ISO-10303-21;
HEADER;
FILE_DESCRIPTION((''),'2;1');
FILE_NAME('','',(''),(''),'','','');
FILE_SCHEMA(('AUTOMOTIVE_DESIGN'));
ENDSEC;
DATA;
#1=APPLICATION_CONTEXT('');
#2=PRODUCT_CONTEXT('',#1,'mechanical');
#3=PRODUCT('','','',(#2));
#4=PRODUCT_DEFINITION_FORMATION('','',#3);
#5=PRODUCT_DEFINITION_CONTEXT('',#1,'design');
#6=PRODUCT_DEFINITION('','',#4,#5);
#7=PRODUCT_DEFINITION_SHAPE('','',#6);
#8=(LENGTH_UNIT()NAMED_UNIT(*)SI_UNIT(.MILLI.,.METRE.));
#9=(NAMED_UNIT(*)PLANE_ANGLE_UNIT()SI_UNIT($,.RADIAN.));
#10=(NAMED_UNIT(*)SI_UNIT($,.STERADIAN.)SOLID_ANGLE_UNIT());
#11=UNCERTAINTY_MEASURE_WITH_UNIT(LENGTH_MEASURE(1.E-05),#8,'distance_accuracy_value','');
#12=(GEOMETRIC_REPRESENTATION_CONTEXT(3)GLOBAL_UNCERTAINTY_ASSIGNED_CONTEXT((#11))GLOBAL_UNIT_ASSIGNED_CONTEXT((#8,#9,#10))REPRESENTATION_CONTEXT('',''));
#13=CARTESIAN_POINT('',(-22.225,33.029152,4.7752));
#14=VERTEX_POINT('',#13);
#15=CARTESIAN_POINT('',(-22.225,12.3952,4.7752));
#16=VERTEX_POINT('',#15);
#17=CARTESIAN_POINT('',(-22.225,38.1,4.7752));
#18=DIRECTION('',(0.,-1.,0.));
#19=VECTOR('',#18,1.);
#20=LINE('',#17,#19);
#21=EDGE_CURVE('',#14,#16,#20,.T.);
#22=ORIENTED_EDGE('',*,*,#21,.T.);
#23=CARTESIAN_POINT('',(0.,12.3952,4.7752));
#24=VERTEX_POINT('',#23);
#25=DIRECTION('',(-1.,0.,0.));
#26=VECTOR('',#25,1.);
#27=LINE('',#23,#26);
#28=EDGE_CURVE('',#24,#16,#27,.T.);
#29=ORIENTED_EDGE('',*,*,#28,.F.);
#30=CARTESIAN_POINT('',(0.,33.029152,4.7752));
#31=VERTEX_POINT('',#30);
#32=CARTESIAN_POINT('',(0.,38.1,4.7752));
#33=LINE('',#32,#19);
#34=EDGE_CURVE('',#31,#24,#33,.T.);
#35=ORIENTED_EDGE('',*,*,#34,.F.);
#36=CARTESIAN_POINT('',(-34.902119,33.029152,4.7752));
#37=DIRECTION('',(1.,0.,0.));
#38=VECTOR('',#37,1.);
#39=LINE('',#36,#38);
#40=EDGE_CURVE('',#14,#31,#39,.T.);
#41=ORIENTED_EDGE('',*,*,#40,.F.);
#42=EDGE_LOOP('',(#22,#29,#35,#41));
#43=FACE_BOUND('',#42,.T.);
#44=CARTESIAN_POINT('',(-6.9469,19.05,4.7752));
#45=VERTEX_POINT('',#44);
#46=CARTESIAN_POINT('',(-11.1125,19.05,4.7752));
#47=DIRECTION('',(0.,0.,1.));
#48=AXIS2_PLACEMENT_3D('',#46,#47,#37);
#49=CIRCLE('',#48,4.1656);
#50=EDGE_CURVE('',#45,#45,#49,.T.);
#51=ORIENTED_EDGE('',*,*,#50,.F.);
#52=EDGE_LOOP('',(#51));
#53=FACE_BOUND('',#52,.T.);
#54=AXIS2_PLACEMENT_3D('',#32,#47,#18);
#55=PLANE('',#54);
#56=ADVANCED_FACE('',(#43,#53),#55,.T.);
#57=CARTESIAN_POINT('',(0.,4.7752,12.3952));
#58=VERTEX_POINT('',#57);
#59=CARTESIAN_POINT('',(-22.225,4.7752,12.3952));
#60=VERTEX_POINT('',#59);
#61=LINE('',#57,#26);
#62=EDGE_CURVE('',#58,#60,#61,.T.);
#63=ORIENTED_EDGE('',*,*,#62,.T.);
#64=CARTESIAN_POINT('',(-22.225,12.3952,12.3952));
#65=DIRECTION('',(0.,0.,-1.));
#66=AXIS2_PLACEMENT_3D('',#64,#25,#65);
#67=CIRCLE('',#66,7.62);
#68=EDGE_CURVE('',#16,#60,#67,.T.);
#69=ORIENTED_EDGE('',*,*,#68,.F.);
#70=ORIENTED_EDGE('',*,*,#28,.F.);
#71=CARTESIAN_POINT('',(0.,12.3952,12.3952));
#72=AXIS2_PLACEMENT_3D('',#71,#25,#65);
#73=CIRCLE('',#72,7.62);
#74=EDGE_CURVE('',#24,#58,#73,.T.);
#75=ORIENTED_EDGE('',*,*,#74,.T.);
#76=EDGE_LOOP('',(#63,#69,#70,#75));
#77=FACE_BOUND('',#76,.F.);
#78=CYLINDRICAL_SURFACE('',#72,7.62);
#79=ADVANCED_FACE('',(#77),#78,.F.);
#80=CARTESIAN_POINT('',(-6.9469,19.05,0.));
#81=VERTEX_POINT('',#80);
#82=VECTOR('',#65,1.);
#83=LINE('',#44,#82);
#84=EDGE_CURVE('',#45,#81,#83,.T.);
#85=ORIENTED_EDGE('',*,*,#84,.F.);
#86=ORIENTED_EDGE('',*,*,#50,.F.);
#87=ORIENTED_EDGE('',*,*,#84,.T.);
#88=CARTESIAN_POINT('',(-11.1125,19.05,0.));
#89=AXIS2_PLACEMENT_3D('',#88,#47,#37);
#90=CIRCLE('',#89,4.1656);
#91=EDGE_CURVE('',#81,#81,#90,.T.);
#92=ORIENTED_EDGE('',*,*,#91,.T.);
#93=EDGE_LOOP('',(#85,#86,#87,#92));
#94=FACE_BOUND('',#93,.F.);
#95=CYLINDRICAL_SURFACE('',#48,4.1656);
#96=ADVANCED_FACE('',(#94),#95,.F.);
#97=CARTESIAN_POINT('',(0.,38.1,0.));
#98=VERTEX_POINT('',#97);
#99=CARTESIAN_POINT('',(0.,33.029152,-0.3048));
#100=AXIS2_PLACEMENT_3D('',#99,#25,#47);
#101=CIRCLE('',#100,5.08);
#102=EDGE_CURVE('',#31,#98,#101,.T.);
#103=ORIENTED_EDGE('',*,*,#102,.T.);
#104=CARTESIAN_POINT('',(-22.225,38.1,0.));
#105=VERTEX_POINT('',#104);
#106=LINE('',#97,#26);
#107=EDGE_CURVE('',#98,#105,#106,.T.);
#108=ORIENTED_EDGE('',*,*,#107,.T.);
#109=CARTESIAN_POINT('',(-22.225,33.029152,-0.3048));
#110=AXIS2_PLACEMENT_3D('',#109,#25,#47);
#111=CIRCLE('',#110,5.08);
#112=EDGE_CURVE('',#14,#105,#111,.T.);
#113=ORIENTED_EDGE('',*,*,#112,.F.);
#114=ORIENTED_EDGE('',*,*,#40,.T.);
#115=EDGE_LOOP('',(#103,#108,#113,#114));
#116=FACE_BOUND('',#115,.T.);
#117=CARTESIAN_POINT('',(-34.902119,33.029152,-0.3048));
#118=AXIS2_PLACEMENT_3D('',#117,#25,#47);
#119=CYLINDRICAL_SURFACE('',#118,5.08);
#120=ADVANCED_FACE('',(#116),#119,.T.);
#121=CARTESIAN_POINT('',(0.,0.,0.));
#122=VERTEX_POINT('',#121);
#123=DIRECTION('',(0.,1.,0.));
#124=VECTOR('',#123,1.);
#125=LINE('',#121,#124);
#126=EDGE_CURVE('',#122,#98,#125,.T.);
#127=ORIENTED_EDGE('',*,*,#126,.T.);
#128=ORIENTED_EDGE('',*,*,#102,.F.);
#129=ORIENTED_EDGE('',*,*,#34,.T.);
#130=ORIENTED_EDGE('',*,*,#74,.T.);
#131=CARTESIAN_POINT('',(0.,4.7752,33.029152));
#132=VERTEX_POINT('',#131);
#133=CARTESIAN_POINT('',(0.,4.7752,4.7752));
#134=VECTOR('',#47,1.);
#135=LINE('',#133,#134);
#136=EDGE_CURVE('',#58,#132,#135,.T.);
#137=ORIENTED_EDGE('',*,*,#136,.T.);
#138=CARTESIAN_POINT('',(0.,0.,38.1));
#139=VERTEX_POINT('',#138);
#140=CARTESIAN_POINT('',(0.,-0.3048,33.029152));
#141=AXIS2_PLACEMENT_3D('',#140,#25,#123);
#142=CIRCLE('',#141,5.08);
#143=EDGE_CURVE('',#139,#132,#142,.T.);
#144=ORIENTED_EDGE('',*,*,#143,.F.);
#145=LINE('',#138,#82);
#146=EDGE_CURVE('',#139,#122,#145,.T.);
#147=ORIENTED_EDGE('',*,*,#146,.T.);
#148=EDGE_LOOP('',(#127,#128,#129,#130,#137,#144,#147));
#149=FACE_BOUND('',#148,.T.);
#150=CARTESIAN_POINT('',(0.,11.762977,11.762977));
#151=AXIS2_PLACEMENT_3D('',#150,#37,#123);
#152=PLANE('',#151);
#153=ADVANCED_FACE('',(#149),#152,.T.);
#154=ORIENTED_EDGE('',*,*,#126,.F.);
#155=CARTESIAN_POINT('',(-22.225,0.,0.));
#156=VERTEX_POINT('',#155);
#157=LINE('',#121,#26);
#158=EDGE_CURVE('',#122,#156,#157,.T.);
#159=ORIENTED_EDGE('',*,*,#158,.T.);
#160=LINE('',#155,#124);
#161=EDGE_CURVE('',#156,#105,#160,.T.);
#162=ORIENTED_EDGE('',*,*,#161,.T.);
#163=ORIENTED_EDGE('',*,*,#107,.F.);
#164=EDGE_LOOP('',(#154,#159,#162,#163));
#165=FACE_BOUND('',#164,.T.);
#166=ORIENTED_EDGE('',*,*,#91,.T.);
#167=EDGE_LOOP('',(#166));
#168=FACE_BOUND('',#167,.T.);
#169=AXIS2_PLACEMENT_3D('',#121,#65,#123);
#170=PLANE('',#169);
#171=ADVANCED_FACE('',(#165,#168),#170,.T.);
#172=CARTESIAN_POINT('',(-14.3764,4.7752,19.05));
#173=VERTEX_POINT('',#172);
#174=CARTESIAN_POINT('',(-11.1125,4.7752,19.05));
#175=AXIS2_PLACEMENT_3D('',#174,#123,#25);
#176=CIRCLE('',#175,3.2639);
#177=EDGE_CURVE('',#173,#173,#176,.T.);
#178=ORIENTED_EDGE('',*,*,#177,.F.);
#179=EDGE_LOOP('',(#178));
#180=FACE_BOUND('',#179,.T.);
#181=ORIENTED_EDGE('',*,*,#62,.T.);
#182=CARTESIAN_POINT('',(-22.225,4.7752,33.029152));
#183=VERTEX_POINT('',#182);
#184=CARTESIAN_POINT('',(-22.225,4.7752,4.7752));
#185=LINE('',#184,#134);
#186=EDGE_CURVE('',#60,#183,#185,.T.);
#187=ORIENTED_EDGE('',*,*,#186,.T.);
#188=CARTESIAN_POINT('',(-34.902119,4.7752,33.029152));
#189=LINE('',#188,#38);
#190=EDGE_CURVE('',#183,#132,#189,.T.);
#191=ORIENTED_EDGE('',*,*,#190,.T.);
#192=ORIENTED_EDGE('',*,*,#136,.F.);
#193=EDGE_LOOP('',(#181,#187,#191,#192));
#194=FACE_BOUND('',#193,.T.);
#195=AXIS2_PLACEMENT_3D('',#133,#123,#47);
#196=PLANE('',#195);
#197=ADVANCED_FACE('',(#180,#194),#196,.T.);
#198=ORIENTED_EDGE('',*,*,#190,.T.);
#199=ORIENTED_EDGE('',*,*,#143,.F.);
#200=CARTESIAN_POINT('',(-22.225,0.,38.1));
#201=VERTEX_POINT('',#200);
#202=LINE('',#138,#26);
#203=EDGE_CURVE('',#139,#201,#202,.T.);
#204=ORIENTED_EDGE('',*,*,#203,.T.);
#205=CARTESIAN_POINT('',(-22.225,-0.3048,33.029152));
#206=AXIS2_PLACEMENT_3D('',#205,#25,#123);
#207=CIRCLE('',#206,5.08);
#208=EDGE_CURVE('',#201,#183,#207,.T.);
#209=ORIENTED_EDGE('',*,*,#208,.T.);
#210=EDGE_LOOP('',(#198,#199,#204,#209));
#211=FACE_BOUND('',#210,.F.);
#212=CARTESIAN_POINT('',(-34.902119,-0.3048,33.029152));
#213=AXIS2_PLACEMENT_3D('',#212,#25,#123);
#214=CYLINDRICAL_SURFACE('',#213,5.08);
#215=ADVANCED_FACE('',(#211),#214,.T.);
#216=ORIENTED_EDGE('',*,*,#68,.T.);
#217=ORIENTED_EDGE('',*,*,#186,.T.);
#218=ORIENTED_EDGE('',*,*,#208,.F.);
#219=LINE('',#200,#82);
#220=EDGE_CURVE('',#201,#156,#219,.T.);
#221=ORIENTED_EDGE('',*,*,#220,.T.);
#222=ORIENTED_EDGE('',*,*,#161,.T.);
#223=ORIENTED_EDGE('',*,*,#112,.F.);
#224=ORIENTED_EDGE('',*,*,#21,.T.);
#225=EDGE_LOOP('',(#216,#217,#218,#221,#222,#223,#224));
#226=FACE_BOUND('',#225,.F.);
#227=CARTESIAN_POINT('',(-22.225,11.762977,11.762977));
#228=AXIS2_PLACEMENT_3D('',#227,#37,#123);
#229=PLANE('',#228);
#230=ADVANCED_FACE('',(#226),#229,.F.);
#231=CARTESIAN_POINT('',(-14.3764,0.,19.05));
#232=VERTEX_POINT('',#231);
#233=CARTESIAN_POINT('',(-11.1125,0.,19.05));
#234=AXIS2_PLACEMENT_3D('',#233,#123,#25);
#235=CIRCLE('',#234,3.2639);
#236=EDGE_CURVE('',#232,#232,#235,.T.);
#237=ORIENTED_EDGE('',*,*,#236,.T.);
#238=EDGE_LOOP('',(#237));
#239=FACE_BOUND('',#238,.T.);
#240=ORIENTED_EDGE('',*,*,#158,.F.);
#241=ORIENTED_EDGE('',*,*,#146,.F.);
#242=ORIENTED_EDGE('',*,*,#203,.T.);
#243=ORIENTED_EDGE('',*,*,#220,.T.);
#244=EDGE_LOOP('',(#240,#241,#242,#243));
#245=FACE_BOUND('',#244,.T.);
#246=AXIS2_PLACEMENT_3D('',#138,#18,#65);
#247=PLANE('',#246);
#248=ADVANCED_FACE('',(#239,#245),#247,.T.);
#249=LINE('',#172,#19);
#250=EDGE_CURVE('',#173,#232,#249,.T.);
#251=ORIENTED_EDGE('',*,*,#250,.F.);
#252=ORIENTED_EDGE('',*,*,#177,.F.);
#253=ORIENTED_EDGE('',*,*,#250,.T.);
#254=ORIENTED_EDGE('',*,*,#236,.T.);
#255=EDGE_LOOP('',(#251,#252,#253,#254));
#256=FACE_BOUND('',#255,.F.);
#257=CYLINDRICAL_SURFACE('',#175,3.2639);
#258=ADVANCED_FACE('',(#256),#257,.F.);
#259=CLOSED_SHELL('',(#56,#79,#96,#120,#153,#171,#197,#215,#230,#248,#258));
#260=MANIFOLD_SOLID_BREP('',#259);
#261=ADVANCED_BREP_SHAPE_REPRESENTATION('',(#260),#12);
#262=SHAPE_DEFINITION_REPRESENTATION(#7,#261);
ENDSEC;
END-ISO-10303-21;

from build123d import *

# Parameters (mm, degrees)
F1_DEPTH    = 22.225
F2_R        = 7.62
F3_T1_DEPTH = 47.5792387778
F4_R        = 3.2639
F5_DEPTH    = 4.7762
F6_R        = 4.1656
F7_DEPTH    = 4.7762


# Not quite as in the source:
# - a fillet or chamfer that OpenCascade refuses, or shapes differently, is made with other operations: its cross-section is extruded or revolved along the edge and cut away or added


with BuildPart() as f1:
    # F0 (on Right) → F1 (new body)
    with BuildSketch(Plane.YZ):
        Polygon((0, 38.1), (0, 0), (38.1, 0), (38.1, 4.7752), (4.7752, 4.7752), (4.7752, 38.1), align=None)
    extrude(amount=-F1_DEPTH)

    # F2
    f2_edges = [f1.edges().sort_by_distance(p)[0] for p in [
        (-11.1125, 4.7752, 4.7752),
    ]]
    fillet(f2_edges, radius=F2_R)

    # F3: fillet of radius 5.08 on 2 edges, made by hand

    # F3_s2 → F3_t1 (cut)
    with BuildSketch(Plane.YZ.offset(-34.9021193889)):
        with BuildLine():
            ThreePointArc((4.7752, 33.0291522444), (3.3934958238, 36.5118247815), (0, 38.1))
            Line((0, 38.1), (4.7752, 38.1))
            Line((4.7752, 38.1), (4.7752, 33.0291522444))
        make_face()
        with BuildLine():
            ThreePointArc((33.0291522444, 4.7752), (36.5118247815, 3.3934958238), (38.1, 0))
            Line((38.1, 0), (38.1, 4.7752))
            Line((38.1, 4.7752), (33.0291522444, 4.7752))
        make_face()
    extrude(amount=F3_T1_DEPTH, mode=Mode.SUBTRACT)

    # F4 (on face) → F5 (cut, through all)
    with BuildSketch(Plane(origin=(0, 4.7752, 0), x_dir=(-1, 0, 0), z_dir=(0, 1, 0))):
        with Locations((11.1125, 19.05)):
            Circle(F4_R)
    extrude(amount=-F5_DEPTH, mode=Mode.SUBTRACT)

    # F6 (on face) → F7 (cut, through all)
    with BuildSketch(Plane.XY.offset(4.7752)):
        with Locations((-11.1125, 19.05)):
            Circle(F6_R)
    extrude(amount=-F7_DEPTH, mode=Mode.SUBTRACT)


solid = f1.part
